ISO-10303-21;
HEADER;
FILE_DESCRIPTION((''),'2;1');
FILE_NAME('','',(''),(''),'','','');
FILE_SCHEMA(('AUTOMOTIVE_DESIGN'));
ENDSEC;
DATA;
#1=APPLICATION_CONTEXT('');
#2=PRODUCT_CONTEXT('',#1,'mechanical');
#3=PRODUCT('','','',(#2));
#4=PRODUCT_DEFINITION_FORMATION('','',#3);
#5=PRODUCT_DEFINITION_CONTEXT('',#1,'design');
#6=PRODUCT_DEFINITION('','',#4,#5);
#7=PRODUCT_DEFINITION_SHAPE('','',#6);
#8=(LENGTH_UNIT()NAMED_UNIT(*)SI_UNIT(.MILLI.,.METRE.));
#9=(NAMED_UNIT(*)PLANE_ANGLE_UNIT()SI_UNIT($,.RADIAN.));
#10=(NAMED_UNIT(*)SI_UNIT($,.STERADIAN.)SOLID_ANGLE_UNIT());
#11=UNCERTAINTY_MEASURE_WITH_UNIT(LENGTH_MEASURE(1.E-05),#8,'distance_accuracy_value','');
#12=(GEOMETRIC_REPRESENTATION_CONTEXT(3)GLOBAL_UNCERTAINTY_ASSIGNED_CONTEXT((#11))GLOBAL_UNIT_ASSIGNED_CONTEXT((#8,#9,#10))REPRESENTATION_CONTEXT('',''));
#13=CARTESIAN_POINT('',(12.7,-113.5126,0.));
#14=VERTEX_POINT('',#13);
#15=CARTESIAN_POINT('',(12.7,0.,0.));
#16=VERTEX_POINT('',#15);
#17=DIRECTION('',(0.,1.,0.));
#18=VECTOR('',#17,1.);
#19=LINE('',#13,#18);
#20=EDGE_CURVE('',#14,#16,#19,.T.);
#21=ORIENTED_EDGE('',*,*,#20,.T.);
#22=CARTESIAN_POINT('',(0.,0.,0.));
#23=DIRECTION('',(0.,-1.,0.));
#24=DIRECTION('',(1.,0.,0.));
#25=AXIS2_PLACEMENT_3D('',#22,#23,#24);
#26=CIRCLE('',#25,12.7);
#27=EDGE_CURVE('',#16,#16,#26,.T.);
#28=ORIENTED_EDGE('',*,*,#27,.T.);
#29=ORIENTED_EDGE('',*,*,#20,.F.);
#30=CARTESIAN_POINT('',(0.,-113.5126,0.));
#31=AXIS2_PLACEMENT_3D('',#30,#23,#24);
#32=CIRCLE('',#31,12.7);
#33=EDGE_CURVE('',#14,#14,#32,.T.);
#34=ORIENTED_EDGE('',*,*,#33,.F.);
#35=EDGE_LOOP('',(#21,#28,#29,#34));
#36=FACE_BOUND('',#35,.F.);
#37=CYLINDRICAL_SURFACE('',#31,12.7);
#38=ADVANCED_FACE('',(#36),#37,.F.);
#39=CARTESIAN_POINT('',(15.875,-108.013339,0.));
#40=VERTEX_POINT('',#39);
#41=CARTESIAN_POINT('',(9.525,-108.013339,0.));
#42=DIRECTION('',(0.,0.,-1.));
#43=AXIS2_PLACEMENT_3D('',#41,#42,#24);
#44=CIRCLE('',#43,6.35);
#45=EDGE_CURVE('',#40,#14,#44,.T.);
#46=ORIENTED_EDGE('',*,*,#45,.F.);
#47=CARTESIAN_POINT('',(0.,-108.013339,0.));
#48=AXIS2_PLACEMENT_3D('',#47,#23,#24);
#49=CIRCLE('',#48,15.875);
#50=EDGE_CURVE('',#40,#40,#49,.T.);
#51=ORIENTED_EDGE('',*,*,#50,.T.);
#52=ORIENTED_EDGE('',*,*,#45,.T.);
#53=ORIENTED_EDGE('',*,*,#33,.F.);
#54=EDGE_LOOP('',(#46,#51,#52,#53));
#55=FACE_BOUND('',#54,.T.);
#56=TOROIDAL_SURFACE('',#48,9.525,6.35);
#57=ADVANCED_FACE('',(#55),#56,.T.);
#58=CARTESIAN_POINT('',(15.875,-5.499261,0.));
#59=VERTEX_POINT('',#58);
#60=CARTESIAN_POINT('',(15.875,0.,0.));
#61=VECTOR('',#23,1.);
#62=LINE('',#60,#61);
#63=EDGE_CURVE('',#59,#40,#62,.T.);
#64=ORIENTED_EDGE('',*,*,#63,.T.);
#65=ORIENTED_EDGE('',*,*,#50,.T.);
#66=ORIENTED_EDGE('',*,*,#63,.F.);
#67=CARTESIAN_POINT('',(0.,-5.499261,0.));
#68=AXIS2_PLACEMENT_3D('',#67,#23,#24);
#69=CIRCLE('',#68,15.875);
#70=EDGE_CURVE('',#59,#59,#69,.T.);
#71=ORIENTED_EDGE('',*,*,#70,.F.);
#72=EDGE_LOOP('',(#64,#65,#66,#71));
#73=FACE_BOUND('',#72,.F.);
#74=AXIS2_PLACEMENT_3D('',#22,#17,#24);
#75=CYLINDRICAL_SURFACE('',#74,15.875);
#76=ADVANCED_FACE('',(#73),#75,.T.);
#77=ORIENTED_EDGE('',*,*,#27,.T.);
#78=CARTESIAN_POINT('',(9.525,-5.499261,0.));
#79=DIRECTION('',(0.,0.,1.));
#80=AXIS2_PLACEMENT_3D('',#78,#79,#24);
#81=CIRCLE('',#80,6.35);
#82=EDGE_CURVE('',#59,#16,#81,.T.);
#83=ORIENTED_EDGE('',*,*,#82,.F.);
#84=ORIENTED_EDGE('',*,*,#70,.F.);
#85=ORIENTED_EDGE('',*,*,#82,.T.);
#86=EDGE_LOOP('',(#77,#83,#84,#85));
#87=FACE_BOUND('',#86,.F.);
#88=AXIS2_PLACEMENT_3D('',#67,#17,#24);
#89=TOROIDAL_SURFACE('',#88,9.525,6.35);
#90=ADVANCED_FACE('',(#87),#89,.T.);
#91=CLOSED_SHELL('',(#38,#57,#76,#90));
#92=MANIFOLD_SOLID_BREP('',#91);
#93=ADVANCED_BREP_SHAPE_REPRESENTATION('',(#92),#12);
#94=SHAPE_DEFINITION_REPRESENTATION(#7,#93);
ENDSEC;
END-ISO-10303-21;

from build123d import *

# Parameters (mm, degrees)
F0_R     = 15.875
F1_DEPTH = 113.5126
F2_R     = 12.7
F3_DEPTH = 113.5126


# Not quite as in the source:
# - a fillet or chamfer that OpenCascade refuses, or shapes differently, is made with other operations: its cross-section is extruded or revolved along the edge and cut away or added


with BuildPart() as f1:
    # F0 (on Front) → F1 (new body)
    with BuildSketch(Plane.XZ):
        Circle(F0_R)
    extrude(amount=F1_DEPTH)

    # F2 (on face) → F3 (cut)
    with BuildSketch(Plane.XZ.offset(113.5126)):
        Circle(F2_R)
    extrude(amount=-F3_DEPTH, mode=Mode.SUBTRACT)

    # F4: fillet of radius 6.35 on 1 edges, made by hand

    # F4_s1 → F4_t2 (revolve, cut)
    with BuildSketch(Plane.XY):
        with BuildLine():
            ThreePointArc((15.875, -108.013338686), (15.024261314, -111.188338686), (12.7, -113.5126))
            Line((12.7, -113.5126), (15.875, -113.5126))
            Line((15.875, -113.5126), (15.875, -108.013338686))
        make_face()
    revolve(axis=Axis((0, -113.5126, 0), (0, -1, 0)), mode=Mode.SUBTRACT)

    # F5: fillet of radius 6.35 on 1 edges, made by hand

    # F5_s1 → F5_t2 (revolve, cut)
    with BuildSketch(Plane.XY):
        with BuildLine():
            ThreePointArc((15.875, -5.499261314), (15.024261314, -2.324261314), (12.7, 0))
            Line((12.7, 0), (15.875, 0))
            Line((15.875, 0), (15.875, -5.499261314))
        make_face()
    revolve(axis=Axis((0, 0, 0), (0, -1, 0)), mode=Mode.SUBTRACT)


solid = f1.part
